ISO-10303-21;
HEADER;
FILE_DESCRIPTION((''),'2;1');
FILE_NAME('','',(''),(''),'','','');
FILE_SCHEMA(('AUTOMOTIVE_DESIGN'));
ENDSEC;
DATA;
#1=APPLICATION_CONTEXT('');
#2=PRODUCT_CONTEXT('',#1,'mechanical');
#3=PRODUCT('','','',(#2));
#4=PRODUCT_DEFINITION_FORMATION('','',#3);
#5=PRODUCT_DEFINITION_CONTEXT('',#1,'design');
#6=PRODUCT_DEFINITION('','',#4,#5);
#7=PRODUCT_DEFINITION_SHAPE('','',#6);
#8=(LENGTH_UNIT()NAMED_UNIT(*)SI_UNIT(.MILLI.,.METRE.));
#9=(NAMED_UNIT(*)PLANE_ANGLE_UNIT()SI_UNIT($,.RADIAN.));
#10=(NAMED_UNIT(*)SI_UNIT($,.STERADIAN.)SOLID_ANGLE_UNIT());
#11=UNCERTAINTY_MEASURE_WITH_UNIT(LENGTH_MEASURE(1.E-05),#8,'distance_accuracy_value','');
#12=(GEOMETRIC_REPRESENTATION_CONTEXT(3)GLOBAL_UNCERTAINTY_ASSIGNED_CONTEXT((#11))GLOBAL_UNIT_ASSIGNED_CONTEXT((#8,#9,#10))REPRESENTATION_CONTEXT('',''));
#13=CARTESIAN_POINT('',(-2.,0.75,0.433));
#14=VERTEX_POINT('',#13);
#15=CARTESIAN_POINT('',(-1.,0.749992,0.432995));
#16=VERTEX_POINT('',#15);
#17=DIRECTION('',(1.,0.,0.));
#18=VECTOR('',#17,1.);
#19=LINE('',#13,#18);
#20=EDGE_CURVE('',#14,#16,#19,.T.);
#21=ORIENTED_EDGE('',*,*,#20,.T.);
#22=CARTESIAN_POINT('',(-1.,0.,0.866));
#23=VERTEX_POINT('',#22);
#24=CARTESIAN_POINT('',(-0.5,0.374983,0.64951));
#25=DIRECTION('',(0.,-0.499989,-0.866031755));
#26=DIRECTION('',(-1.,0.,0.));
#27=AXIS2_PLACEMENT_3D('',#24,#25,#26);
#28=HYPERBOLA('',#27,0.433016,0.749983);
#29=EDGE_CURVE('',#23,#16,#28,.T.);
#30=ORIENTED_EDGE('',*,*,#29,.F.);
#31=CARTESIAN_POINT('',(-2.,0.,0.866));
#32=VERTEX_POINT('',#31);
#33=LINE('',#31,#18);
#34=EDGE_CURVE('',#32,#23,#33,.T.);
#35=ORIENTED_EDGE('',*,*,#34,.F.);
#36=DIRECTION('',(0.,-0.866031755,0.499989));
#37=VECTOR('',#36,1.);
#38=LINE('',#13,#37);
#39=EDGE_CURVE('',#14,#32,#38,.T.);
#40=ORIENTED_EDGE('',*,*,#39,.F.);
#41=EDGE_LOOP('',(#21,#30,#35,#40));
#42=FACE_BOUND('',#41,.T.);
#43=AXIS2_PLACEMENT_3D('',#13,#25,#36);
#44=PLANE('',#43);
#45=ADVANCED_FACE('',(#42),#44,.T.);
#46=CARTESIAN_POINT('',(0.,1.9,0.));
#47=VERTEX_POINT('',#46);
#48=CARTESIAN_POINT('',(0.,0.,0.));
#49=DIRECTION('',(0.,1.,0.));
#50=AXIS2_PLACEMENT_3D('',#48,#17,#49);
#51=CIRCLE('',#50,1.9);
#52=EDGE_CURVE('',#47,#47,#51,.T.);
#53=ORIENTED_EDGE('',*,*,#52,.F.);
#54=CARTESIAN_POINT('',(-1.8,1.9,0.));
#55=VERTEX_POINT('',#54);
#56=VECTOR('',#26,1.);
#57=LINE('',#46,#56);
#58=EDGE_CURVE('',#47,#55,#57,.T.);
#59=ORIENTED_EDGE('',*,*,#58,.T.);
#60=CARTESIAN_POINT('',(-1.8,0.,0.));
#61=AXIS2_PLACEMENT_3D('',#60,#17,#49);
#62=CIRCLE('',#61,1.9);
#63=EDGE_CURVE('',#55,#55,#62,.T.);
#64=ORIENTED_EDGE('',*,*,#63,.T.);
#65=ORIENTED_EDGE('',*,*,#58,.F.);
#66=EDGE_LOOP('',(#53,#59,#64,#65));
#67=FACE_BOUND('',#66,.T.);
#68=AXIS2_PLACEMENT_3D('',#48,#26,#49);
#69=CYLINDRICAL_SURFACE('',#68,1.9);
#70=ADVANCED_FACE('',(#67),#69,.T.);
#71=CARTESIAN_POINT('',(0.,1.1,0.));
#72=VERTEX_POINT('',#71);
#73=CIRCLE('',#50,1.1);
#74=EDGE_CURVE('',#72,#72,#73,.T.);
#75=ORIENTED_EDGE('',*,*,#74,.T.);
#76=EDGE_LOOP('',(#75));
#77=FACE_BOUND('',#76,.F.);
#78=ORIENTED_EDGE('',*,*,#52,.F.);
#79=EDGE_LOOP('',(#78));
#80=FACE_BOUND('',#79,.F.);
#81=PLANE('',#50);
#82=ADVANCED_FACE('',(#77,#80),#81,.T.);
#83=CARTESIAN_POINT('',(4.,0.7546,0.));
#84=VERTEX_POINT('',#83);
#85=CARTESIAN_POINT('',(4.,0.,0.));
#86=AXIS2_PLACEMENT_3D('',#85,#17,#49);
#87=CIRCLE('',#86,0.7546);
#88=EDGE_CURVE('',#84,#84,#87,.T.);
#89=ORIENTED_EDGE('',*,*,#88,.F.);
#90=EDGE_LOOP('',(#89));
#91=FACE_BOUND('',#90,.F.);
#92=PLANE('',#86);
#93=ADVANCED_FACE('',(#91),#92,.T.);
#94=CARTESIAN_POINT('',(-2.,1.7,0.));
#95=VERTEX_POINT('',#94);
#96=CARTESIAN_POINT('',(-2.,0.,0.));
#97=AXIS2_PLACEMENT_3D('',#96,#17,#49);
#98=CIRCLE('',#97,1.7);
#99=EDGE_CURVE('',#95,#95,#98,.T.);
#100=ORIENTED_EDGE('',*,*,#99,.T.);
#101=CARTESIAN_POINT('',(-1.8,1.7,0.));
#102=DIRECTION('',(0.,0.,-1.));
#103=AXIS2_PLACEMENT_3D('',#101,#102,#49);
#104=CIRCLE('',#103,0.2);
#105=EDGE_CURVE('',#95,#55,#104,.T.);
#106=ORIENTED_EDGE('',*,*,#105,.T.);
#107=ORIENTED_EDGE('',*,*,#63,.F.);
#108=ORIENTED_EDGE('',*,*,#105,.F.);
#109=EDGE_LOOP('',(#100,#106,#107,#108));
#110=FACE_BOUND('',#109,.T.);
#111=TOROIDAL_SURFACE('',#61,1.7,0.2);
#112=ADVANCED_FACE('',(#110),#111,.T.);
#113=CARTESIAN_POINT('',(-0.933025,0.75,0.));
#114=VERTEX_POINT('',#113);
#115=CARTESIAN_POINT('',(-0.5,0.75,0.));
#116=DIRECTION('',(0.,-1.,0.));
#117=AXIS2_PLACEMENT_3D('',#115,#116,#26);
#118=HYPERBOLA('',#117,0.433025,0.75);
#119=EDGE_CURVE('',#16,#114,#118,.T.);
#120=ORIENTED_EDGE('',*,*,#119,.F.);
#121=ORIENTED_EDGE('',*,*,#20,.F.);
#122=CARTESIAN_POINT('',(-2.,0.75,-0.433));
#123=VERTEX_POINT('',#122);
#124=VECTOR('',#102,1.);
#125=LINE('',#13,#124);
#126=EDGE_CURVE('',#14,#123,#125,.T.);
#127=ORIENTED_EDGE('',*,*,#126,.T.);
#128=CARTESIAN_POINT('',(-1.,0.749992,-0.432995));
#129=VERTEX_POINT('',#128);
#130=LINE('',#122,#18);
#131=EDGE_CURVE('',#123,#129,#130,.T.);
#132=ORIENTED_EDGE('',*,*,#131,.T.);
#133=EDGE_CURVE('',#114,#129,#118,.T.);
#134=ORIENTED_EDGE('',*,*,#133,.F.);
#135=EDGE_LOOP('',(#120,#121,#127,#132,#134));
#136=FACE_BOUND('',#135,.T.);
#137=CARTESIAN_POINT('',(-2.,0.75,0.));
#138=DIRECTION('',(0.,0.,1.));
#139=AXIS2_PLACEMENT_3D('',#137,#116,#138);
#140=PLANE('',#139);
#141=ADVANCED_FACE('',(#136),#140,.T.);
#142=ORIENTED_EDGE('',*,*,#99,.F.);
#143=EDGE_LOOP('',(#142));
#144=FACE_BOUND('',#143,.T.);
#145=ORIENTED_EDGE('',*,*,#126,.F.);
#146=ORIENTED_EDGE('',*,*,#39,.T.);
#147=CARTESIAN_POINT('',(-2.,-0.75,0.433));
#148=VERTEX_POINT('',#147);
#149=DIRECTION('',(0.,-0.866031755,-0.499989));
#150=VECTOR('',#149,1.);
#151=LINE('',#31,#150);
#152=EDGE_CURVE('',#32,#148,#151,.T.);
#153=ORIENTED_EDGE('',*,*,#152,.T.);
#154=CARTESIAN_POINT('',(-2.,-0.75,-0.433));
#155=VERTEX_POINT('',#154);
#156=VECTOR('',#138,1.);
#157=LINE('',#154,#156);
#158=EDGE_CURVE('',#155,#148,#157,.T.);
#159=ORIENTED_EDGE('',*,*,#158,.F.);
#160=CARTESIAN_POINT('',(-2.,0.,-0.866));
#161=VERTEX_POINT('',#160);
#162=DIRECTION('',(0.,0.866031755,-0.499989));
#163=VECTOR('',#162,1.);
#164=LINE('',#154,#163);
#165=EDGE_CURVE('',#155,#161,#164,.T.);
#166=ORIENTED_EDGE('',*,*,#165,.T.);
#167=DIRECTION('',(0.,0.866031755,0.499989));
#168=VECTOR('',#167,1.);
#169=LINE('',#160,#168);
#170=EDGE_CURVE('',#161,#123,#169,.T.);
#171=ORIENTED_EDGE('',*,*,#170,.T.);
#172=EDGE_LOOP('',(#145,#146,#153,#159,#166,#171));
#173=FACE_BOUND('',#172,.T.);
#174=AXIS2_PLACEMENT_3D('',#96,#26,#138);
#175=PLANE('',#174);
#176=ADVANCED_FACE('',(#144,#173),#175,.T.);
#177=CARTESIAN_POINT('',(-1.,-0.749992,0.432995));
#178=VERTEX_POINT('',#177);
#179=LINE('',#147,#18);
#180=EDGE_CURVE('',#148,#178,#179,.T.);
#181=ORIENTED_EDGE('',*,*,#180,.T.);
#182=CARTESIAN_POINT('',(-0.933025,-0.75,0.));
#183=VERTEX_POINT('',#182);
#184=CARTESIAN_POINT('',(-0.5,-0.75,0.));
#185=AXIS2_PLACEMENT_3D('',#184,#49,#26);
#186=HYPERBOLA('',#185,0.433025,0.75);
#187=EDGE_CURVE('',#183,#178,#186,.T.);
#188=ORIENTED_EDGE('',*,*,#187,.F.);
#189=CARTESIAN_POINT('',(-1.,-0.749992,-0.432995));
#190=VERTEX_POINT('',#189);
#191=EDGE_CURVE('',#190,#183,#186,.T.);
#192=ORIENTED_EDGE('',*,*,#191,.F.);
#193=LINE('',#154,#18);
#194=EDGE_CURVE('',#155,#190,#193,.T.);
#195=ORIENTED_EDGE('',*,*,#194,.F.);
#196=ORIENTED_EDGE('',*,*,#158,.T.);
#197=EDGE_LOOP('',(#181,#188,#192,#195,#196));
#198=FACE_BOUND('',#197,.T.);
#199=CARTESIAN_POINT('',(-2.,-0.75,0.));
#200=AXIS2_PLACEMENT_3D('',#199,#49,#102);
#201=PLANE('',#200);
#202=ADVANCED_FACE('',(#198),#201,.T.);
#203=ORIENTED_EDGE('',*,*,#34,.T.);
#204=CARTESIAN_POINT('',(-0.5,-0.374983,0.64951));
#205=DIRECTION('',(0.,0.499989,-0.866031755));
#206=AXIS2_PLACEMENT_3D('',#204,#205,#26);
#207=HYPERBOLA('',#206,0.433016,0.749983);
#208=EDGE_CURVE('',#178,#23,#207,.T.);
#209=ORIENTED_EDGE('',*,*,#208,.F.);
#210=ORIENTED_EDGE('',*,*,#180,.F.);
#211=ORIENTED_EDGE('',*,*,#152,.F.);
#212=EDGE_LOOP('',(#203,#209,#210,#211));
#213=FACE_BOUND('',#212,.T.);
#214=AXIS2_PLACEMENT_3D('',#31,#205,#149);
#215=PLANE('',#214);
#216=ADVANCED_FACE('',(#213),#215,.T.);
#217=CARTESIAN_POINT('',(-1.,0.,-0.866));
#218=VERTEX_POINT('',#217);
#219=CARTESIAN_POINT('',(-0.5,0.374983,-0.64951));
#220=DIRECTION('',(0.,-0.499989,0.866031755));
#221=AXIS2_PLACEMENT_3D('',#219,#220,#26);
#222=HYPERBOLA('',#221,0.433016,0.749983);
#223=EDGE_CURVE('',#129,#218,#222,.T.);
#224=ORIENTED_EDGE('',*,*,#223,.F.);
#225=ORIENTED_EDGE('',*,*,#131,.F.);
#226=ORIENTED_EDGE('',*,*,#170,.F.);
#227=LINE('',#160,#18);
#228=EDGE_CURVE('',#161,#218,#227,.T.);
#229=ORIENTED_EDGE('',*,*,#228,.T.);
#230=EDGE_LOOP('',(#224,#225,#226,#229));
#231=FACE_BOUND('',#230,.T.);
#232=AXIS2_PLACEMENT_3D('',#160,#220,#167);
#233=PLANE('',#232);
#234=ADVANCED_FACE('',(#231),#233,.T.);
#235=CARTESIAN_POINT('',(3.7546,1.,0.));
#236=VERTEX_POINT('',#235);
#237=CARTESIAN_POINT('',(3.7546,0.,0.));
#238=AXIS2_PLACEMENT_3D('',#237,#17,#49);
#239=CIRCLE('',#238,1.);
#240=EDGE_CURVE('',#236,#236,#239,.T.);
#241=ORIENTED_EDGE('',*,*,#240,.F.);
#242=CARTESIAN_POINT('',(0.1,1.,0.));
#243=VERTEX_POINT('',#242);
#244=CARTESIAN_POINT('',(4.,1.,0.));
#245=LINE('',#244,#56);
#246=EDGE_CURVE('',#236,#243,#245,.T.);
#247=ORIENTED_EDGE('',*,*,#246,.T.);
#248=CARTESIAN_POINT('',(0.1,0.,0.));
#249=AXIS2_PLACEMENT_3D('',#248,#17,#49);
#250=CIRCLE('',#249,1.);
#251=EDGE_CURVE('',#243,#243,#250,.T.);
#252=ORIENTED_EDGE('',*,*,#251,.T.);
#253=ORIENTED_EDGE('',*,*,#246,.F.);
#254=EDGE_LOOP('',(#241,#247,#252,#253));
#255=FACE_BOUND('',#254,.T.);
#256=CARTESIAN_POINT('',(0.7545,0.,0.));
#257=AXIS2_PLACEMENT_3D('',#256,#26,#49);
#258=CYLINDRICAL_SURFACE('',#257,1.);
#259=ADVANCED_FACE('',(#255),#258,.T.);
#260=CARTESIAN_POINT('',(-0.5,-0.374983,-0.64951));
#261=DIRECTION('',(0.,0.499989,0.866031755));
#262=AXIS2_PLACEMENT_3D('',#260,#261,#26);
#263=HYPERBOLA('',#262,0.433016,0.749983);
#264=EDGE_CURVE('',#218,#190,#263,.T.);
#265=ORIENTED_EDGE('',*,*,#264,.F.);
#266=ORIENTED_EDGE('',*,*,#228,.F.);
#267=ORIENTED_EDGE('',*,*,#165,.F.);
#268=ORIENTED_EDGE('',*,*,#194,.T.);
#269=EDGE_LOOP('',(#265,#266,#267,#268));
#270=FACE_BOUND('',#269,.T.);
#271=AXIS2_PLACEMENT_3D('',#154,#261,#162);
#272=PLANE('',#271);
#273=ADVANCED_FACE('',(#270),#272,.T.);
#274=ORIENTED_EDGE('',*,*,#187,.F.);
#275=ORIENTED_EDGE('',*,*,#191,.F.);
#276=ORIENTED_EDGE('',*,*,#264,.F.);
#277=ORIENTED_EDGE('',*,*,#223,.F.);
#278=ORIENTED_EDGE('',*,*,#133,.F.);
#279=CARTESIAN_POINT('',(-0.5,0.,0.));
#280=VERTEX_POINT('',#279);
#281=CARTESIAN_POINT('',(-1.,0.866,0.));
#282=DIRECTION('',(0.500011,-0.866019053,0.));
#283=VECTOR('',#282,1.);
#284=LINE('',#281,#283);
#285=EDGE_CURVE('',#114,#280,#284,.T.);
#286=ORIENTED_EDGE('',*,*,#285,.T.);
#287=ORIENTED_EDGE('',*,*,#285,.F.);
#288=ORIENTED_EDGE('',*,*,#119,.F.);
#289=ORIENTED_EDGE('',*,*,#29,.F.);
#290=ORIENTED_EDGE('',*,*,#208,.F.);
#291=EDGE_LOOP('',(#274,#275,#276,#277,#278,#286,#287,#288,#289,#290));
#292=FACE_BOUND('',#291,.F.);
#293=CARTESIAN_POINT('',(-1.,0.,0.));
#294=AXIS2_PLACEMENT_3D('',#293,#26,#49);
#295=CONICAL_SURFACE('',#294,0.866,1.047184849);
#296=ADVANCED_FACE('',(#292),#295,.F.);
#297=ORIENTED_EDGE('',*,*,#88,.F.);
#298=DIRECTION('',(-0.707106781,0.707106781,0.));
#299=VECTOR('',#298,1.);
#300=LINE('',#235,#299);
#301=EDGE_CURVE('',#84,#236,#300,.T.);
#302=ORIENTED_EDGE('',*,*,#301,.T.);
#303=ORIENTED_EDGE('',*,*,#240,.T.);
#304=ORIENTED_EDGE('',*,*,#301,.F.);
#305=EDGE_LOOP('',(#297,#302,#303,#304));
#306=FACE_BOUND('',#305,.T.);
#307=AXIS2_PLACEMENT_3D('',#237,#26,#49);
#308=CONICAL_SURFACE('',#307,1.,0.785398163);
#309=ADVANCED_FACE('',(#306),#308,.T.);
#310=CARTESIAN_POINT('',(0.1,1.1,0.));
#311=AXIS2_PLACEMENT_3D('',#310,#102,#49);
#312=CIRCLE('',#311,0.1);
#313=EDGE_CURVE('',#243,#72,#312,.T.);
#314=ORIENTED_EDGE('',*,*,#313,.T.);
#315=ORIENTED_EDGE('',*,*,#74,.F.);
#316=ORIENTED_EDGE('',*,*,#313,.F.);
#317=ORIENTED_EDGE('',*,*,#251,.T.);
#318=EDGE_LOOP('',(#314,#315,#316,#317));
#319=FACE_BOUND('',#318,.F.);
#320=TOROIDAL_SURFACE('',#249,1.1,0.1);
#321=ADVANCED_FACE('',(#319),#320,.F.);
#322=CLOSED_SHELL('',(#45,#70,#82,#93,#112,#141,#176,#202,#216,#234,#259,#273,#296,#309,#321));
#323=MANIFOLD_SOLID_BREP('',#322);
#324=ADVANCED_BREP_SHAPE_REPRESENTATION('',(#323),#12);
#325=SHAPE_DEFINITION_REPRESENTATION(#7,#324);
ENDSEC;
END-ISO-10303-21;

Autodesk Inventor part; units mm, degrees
ref_plane "YZ Plane" through (0, 0, 0) normal (1, 0, 0) x (0, 1, 0)
ref_plane "XZ Plane" through (0, 0, 0) normal (0, 1, 0) x (-1, 0, 0)
sketch "Sketch1" plane through (0, 0, 0) normal (0, 0, 1) x (1, 0, 0)
  line L0 (-0.5, 0) -> (4, 0)
  line L1 (4, 0) -> (4, 1)
  line L2 (4, 1) -> (1, 1)
  line L3 (1, 1) -> (0.7545, 1)
  line L4 (0.7545, 1) -> (0, 1)
  line L5 (0, 1) -> (0, 1.9)
  line L6 (0, 1.9) -> (-2, 1.9)
  line L7 (-2, 1.9) -> (-2, 0.866)
  line L8 (-2, 0.866) -> (-1, 0.866)
  line L9 (-1, 0.866) -> (-0.5, 0)
  line L10 (-3.2, 0) -> (5.2, 0) projected
  line L11 (0, -0.38) -> (0, 2.28) projected
  line L12 (1, 1) -> (0, 1) construction
  dimension "d1" = 3
  dimension "d2" = 0.2455
  dimension "d3" = 2
  dimension "d4" = 1
  dimension "d5" = 60
  dimension "d6" = 2
  dimension "d7" = 2
  dimension "d8" = 1.7321
  dimension "d9" = 3.8
  dimension "d26" = 4
revolve "Body" add sketch "Sketch1" angle 360 about axis through (-0.5, 0, 0) along (1, 0, 0)
sketch "Sketch2" plane through (-2, 0, 0) normal (-1, 0, 0) x (0, 0, 1)
  circle A0 centre (0, 0) radius 0.866 projected
  line L0 (0, -2.66) -> (0, 2.66) projected
  line L1 (-2.66, 0) -> (2.66, 0) projected
  line L2 (0.866, 0) -> (0.433, -0.75)
  line L3 (0.433, -0.75) -> (-0.433, -0.75)
  line L4 (-0.433, -0.75) -> (-0.866, 0)
  line L5 (-0.866, 0) -> (-0.433, 0.75)
  line L6 (-0.433, 0.75) -> (0.433, 0.75)
  line L7 (0.433, 0.75) -> (0.866, 0)
extrude "Slot" add sketch "Sketch2" against normal up to next contours L7 A0 | A0 L2 | L6 L0 A0 | A0 L0 L3 | L0 L6 A0 | A0 L3 L0 | L4 A0 | A0 L5
fillet "Fillet1" radius 0.2 1 edges at (-2, -1.9, 0)
thread "Thread" size "M2x0.4" class "6g" standard "ISO Metric profile" length 3
chamfer "Chamfer1" distance 0.2454 distance2 0.2454 1 edges at (4, -1, 0) measured on face at (4, -0.4588, -0.3309)
ref_plane "Work Plane1" through (29, 0, 0) normal (0, -1, 0) x (1, 0, 0)
fillet "Fillet2" radius 0.1 1 edges at (0, -1, 0)
equation "\"d30\" = R"
equation "\"d17\" = RR"
equation "\"d13\" = GEL"
equation "\"d15\" = -0.5 * SPD + 0.5 * GD"
equation "\"d16\" = GUL"
equation "\"d1\" = GEL"
equation "\"d3\" = KOH"
equation "\"d4\" = INTI"
equation "\"d6\" = GD"
equation "\"d7\" = BDM"
equation "\"d8\" = 1.1547 * SW"
equation "\"d9\" = KOD"
equation "\"d26\" = NLG"
equation "\"GD\" = 2"
equation "\"NLG\" = 4"
equation "\"GEL\" = 3"
equation "\"KOD\" = 3.8"
equation "\"KOH\" = 2"
equation "\"INTI\" = 1"
equation "\"GAL\" = 0.61345 * PTC"
equation "\"GUL\" = 0.61345 * PTC"
equation "\"BDM\" = NND"
equation "\"SW\" = 1.5"
equation "\"RR\" = 0.2"
equation "\"SPD\" = NND - 1.2269 * PTC"
equation "\"R\" = 0.1"
equation "\"TOA\" = 30deg"
equation "\"GD1\" = THREADDIA - 1.2269 * PTC"
equation "\"THREADDIA\" = 2"
equation "\"FAWI\" = 45deg"
equation "\"PTC\" = 0.4"
equation "\"NND\" = 2"
equation "\"E0\" = 1.155 * SW"
properties part number "ISO 4762 - M2 x 4" material "Stainless Steel, 440C"
